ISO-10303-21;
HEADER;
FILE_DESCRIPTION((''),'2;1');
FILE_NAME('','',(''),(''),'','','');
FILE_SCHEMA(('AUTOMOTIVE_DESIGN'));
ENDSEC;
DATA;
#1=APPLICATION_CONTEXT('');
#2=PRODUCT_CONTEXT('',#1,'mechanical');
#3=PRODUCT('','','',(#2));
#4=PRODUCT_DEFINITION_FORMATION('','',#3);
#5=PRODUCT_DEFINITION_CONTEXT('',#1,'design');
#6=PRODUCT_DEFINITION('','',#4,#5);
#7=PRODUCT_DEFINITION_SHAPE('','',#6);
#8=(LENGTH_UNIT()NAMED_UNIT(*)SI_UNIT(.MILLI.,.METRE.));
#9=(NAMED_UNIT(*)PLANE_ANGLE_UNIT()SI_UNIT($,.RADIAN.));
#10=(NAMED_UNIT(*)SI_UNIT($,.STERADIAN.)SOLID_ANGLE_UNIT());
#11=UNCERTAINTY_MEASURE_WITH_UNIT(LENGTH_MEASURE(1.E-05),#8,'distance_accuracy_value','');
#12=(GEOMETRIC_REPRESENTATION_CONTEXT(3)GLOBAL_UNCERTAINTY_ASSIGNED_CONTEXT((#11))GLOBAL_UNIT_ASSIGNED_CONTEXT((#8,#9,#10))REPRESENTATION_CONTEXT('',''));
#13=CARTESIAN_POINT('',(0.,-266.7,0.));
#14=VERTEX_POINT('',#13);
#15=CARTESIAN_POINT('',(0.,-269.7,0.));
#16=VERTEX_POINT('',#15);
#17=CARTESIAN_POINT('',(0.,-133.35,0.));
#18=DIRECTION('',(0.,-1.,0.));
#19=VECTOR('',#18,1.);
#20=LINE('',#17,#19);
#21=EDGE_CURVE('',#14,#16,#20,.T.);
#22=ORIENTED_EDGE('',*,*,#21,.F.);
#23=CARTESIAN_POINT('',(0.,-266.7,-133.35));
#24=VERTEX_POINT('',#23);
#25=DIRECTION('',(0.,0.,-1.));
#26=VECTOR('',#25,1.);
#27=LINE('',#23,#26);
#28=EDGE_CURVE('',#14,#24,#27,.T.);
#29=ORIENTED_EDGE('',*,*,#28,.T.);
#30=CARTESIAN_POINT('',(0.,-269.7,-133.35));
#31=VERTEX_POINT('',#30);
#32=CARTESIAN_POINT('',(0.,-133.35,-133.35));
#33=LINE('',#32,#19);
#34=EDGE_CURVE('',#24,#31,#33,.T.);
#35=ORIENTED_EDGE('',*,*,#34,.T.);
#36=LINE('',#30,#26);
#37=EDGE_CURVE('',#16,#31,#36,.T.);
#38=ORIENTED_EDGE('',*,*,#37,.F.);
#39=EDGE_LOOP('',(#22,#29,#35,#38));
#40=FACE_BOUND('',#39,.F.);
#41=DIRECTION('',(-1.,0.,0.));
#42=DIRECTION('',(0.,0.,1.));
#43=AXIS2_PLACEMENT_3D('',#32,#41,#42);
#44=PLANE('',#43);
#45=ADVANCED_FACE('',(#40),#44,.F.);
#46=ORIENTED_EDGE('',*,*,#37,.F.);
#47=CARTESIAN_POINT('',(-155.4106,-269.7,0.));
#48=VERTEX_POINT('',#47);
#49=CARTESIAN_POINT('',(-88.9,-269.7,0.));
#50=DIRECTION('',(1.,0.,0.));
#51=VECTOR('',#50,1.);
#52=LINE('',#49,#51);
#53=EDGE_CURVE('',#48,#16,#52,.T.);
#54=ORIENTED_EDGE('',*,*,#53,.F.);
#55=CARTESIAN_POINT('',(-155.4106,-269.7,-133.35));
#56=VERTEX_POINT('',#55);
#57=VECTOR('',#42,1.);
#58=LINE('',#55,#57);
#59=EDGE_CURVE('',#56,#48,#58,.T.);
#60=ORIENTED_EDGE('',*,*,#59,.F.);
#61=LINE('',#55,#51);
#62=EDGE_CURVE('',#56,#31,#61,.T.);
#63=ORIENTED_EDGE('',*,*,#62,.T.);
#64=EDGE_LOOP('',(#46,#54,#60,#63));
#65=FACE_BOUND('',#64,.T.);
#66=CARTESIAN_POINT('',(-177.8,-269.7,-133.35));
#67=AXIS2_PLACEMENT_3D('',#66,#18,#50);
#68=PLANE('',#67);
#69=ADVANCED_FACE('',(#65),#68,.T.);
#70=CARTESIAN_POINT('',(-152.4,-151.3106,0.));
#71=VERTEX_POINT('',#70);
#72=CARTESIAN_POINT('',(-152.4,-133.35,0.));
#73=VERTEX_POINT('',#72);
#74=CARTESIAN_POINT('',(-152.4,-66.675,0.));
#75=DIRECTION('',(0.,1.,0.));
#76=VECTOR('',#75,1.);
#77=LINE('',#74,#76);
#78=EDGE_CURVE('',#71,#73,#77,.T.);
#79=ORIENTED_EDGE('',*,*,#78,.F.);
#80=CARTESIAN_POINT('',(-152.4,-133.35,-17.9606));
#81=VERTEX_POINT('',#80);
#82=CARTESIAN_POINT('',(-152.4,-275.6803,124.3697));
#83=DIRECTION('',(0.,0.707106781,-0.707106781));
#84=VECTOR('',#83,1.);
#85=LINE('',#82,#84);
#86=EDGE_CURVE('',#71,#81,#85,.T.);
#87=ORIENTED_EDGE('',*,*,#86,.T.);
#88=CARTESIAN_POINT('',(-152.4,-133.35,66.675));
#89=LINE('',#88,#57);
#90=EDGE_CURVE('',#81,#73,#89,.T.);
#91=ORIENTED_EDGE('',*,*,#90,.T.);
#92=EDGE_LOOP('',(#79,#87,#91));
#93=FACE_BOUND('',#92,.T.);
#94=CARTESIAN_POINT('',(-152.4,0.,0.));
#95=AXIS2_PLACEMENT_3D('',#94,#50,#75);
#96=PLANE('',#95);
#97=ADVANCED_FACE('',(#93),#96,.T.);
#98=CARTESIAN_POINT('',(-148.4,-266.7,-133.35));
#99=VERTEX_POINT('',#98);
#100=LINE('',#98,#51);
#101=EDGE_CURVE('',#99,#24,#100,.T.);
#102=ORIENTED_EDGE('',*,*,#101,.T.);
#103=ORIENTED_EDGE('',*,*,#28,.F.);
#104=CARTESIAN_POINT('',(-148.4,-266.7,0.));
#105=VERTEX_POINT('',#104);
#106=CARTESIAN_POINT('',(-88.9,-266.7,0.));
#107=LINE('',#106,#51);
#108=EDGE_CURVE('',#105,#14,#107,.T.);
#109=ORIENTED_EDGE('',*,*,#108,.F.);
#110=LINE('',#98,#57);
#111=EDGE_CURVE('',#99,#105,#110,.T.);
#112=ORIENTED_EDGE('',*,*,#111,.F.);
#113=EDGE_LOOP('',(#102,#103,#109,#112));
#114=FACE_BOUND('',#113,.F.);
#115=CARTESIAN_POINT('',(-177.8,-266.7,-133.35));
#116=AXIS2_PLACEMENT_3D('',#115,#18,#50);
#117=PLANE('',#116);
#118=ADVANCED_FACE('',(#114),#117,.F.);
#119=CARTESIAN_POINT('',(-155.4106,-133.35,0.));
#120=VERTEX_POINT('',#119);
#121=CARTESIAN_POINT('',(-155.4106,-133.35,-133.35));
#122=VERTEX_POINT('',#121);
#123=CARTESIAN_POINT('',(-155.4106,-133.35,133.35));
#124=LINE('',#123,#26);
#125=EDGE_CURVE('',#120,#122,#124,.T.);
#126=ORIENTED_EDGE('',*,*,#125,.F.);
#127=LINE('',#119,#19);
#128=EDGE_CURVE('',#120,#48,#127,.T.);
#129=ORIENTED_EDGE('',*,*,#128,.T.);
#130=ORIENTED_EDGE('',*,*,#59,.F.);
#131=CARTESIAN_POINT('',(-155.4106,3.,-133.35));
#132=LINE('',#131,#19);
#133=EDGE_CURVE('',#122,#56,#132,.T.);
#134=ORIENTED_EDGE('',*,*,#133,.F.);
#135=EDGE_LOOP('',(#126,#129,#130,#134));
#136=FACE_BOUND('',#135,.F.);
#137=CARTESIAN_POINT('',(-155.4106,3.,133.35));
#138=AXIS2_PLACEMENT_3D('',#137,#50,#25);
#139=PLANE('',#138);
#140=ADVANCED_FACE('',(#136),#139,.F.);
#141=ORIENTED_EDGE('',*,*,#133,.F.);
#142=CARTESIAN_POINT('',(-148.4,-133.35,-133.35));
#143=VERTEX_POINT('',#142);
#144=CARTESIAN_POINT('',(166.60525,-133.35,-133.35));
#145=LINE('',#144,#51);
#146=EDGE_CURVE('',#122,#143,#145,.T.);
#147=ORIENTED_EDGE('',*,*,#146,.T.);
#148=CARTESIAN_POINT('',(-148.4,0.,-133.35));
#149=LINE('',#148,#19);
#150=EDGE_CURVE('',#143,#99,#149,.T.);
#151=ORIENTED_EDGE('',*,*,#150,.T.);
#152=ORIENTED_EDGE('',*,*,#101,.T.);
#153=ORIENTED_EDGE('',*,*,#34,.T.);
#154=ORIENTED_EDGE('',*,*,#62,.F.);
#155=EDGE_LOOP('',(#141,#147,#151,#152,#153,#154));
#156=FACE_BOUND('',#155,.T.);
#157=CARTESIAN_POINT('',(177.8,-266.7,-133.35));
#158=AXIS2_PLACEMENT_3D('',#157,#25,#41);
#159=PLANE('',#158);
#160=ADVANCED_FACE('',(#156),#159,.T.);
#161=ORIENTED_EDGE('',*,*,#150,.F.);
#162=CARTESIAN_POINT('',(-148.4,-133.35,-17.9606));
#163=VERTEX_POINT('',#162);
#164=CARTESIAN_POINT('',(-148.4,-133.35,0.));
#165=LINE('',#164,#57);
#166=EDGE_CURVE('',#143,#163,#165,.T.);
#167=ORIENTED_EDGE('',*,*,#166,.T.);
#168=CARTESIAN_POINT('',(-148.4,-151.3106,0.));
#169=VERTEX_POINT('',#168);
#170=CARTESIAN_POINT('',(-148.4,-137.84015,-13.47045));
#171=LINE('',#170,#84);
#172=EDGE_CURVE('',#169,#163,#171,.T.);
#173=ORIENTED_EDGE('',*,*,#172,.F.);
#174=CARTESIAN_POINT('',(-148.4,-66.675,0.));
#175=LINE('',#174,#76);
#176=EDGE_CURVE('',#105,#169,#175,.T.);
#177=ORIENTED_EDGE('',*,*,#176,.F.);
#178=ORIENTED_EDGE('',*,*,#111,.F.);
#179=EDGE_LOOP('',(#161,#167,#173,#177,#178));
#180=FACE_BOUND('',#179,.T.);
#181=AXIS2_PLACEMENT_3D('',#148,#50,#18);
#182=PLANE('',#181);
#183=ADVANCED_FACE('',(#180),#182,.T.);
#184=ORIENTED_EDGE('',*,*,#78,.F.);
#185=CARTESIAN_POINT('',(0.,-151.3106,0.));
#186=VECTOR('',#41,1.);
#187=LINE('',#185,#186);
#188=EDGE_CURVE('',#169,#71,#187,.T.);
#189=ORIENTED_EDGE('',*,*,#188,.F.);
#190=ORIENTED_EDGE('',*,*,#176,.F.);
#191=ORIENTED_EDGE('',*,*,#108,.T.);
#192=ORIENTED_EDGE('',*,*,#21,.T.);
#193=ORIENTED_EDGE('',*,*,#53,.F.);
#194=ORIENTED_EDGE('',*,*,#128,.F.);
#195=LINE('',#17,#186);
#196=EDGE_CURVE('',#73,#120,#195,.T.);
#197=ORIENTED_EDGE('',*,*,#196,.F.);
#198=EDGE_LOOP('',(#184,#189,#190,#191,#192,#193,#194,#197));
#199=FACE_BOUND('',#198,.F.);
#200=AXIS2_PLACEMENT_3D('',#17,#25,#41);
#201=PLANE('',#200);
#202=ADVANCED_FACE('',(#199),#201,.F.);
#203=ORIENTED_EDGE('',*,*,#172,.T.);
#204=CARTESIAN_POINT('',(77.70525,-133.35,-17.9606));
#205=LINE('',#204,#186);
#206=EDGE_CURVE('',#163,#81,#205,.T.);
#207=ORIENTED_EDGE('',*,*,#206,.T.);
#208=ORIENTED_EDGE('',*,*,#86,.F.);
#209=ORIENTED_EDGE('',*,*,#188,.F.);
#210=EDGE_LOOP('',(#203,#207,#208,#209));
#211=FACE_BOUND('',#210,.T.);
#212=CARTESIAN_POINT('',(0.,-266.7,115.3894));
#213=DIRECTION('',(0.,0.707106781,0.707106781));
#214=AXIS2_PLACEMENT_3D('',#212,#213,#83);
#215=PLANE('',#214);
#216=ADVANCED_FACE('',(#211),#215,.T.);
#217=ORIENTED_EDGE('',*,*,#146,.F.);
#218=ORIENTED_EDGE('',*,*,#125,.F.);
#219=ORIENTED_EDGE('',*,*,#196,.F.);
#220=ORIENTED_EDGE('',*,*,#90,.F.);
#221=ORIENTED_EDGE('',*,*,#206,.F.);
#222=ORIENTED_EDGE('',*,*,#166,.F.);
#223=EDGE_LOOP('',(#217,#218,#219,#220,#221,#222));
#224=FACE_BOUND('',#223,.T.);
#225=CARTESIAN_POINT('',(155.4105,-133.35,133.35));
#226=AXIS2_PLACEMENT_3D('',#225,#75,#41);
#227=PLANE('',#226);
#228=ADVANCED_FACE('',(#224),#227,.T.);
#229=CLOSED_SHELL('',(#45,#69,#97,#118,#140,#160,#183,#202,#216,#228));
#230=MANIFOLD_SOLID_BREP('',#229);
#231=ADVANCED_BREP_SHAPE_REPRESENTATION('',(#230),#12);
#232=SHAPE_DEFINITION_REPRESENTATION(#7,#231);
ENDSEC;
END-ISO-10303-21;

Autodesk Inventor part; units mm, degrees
ref_plane "YZ Plane" through (0, 0, 0) normal (1, 0, 0) x (0, 1, 0)
ref_plane "XZ Plane" through (0, 0, 0) normal (0, 1, 0) x (-1, 0, 0)
ref_plane "XY Plane" through (0, 0, 0) normal (0, 0, 1) x (1, 0, 0)
sketch "Sketch1" plane through (0, 0, 0) normal (0, 1, 0) x (-1, 0, 0)
  line L0 (110, -80) -> (-110, -80)
  line L1 (-110, -80) -> (-110, 80)
  line L2 (-110, 80) -> (110, 80)
  line L3 (110, 80) -> (110, -80)
  line L4 (320.2117, -53.5522) -> (168.036, -53.5522) construction
  line L5 (168.036, -53.5522) -> (168.036, 90.1689) construction
  line L6 (168.036, 90.1689) -> (320.2117, 90.1689) construction
  line L7 (320.2117, 90.1689) -> (320.2117, -53.5522) construction
  line L8 (124.3, -89.75) -> (-124.3, -89.75) construction
  line L9 (-124.3, -89.75) -> (-124.3, 89.75) construction
  line L10 (-124.3, 89.75) -> (124.3, 89.75) construction
  line L11 (124.3, 89.75) -> (124.3, -89.75) construction
  line L12 (124.3, -89.75) -> (-124.3, 89.75) construction
  line L13 (-124.3, -89.75) -> (124.3, 89.75) construction
  line L14 (-152.4, -107.95) -> (152.4, -107.95)
  line L15 (152.4, -107.95) -> (152.4, 107.95)
  line L16 (152.4, 107.95) -> (-152.4, 107.95)
  line L17 (-152.4, 107.95) -> (-152.4, -107.95)
  line L18 (-152.4, -107.95) -> (152.4, 107.95) construction
  line L19 (152.4, -107.95) -> (-152.4, 107.95) construction
  line L20 (177.8, 133.35) -> (177.8, -133.35)
  line L21 (177.8, -133.35) -> (-177.8, -133.35)
  line L22 (-177.8, -133.35) -> (-177.8, 133.35)
  line L23 (-177.8, 133.35) -> (177.8, 133.35)
  point P0 (0, 0)
  dimension "d11" = 220
  dimension "d12" = 160
  dimension "d15" = 248.6
  dimension "d16" = 179.5
  dimension "d18" = 304.8
  dimension "d19" = 215.9
  dimension "d22" = 25.4
extrude "Top" add sketch "Sketch1" along normal blind 25.4 contours L17 L16 L15 L14 | L20 L21 L22 L23
sketch "Sketch3" plane through (177.8, 0, 133.35) normal (1, 0, 0) x (0, 0, -1)
  line L0 (0, 0) -> (0, 25.4) projected
  line L1 (266.7, 0) -> (266.7, 25.4) projected
  line L2 (0, 0) -> (266.7, 0)
  line L3 (266.7, 0) -> (266.7, -266.7)
  line L4 (266.7, -266.7) -> (0, -266.7)
  line L5 (0, -266.7) -> (0, 0)
  point P0 (133.35, 0)
  dimension "d25" = 266.7
extrude "Right" add sketch "Sketch3" against normal blind 50.8
sketch "Sketch4" plane through (-177.8, 0, -133.35) normal (-1, 0, 0) x (0, 0, 1)
  line L0 (0, 0) -> (0, 25.4) projected
  line L1 (266.7, -266.7) -> (266.7, 0) projected
  line L2 (0, 0) -> (266.7, 0)
  line L3 (266.7, 0) -> (266.7, -266.7)
  line L4 (266.7, -266.7) -> (0, -266.7)
  line L5 (0, -266.7) -> (0, 0)
  point P0 (133.35, 0)
  dimension "d28" = 266.7
extrude "Left" add sketch "Sketch4" against normal blind 50.8
sketch "Sketch5" plane through (0, 0, 0) normal (1, 0, 0) x (0, 1, 0)
  line L0 (-266.7, -133.35) -> (25.4, -133.35) projected
  line L1 (-266.7, 133.35) -> (-266.7, -133.35) projected
  line L2 (0, -133.35) -> (-266.7, 133.35)
  line L3 (-266.7, 133.35) -> (-275.6803, 124.3697)
  line L4 (-275.6803, 124.3697) -> (-8.9803, -142.3303)
  line L5 (-8.9803, -142.3303) -> (0, -133.35)
  point P0 (0, 0)
  dimension "d31" = 12.7
extrude "Plexiglass Cut" cut sketch "Sketch5" along normal mid plane 304.8 contours L4 L1 L2 L0 | L0 L5 L4 | L4 L3 L1
sketch "Sketch6" plane through (-177.8, -266.7, -133.35) normal (0, -1, 0) x (1, 0, 0)
  line L0 (0, 0) -> (0, 266.7) projected
  line L1 (355.6, 0) -> (0, 0) projected
  line L2 (0, 266.7) -> (355.6, 266.7)
  line L3 (355.6, 266.7) -> (355.6, 0)
  line L4 (355.6, 0) -> (0, 0)
  line L5 (0, 0) -> (0, 266.7)
  point P0 (177.8, 133.35)
extrude "Bottom" add sketch "Sketch6" along normal blind 25.4
sketch "Sketch9" plane through (0, 25.4, 0) normal (0, 1, 0) x (1, 0, 0)
  line L0 (177.8, -133.35) -> (127, -133.35) projected
  line L1 (177.8, 133.35) -> (-177.8, 133.35) projected
  line L2 (177.8, -133.35) -> (-177.8, -133.35)
  line L3 (-177.8, -133.35) -> (-177.8, 133.35)
  line L4 (-177.8, 133.35) -> (177.8, 133.35)
  line L5 (177.8, 133.35) -> (177.8, -133.35)
  point P0 (0, 0)
extrude "Top Flattening" cut sketch "Sketch9" against normal blind 22.4
sketch "Sketch10" plane through (0, 3, 0) normal (0, 1, 0) x (1, 0, 0)
  line L0 (-177.8, -133.35) -> (-177.8, 133.35) projected
  line L1 (-155.4106, 133.35) -> (-177.8, 133.35)
  line L2 (-177.8, 133.35) -> (-177.8, -133.35)
  line L3 (-177.8, -133.35) -> (-155.4106, -133.35)
  line L4 (-155.4106, -133.35) -> (-155.4106, 133.35)
  line L5 (177.8, 133.35) -> (177.8, -133.35)
  line L6 (177.8, -133.35) -> (155.4106, -133.35)
  line L7 (155.4106, -133.35) -> (155.4106, 133.35)
  line L8 (155.4106, 133.35) -> (177.8, 133.35)
  line L9 (152.4, -115.3895) -> (152.4, 133.35) projected
  point P0 (0, 0)
  point P1 (-177.8, 0)
  dimension "d48" = 22.3894
  dimension "d49" = 22.3894
extrude "Outer Side Flattening" cut sketch "Sketch10" against normal through all
sketch "Sketch11" plane through (-177.8, -292.1, -133.35) normal (0, -1, 0) x (1, 0, 0)
  line L0 (22.3894, 0) -> (333.2106, 0) projected
  line L1 (333.2106, 0) -> (22.3894, 0)
  line L2 (22.3894, 0) -> (22.3894, 266.7)
  line L3 (22.3894, 266.7) -> (333.2106, 266.7)
  line L4 (333.2106, 266.7) -> (333.2106, 0)
  point P0 (177.8, 133.35)
extrude "Bottom Flattening" cut sketch "Sketch11" against normal blind 22.4
sketch "Sketch12" plane through (155.4106, 3, -133.35) normal (0, 0, -1) x (-1, 0, 0)
  line L0 (155.4106, -3) -> (155.4106, -269.7) construction
  line L1 (7.0106, -269.7) -> (7.0106, -3)
  line L2 (7.0106, -3) -> (303.8106, -3)
  line L3 (303.8106, -3) -> (303.8106, -269.7)
  line L4 (303.8106, -269.7) -> (7.0106, -269.7)
  line L5 (7.0106, -269.7) -> (303.8106, -3) construction
  line L6 (7.0106, -3) -> (303.8106, -269.7) construction
  point P0 (155.4106, -136.35)
  point P1 (155.4106, -3)
  dimension "d54" = 296.8
extrude "Inner Flattening" cut sketch "Sketch12" against normal through all
sketch "Sketch13" plane through (-155.4106, 3, 133.35) normal (0, 0, 1) x (1, 0, 0)
  line L0 (310.8211, -272.7) -> (310.8211, 0) projected
  line L1 (0, -272.7) -> (0, 0) projected
  line L2 (310.8211, -136.35) -> (0, -136.35)
  line L3 (0, -136.35) -> (0, 0)
  line L4 (0, 0) -> (310.8211, 0)
  line L5 (310.8211, 0) -> (310.8211, -136.35)
  point P0 (155.4106, -3)
  point P1 (310.8211, 0)
  point P2 (0, -136.35)
extrude "Top Cut" cut sketch "Sketch13" against normal through all
sketch "Sketch14" plane through (-155.4106, -133.35, 133.35) normal (0, 1, 0) x (1, 0, 0)
  line L0 (155.4106, 133.35) -> (0, 133.35)
  line L1 (0, 133.35) -> (0, 266.7)
  line L2 (0, 266.7) -> (155.4106, 266.7)
  line L3 (155.4106, 266.7) -> (155.4106, 133.35)
  line L4 (0, 0) -> (310.8212, 0) projected
  line L5 (0, 266.7) -> (310.8212, 266.7)
  line L6 (310.8212, 266.7) -> (310.8212, 0)
  line L7 (310.8212, 0) -> (0, 0)
  line L8 (0, 0) -> (0, 266.7)
extrude "Quarter Cut" cut sketch "Sketch14" against normal through all contours L3 L5 L6 L4 L8 L0
properties part number "Apple iPad 2022 Hologram"
